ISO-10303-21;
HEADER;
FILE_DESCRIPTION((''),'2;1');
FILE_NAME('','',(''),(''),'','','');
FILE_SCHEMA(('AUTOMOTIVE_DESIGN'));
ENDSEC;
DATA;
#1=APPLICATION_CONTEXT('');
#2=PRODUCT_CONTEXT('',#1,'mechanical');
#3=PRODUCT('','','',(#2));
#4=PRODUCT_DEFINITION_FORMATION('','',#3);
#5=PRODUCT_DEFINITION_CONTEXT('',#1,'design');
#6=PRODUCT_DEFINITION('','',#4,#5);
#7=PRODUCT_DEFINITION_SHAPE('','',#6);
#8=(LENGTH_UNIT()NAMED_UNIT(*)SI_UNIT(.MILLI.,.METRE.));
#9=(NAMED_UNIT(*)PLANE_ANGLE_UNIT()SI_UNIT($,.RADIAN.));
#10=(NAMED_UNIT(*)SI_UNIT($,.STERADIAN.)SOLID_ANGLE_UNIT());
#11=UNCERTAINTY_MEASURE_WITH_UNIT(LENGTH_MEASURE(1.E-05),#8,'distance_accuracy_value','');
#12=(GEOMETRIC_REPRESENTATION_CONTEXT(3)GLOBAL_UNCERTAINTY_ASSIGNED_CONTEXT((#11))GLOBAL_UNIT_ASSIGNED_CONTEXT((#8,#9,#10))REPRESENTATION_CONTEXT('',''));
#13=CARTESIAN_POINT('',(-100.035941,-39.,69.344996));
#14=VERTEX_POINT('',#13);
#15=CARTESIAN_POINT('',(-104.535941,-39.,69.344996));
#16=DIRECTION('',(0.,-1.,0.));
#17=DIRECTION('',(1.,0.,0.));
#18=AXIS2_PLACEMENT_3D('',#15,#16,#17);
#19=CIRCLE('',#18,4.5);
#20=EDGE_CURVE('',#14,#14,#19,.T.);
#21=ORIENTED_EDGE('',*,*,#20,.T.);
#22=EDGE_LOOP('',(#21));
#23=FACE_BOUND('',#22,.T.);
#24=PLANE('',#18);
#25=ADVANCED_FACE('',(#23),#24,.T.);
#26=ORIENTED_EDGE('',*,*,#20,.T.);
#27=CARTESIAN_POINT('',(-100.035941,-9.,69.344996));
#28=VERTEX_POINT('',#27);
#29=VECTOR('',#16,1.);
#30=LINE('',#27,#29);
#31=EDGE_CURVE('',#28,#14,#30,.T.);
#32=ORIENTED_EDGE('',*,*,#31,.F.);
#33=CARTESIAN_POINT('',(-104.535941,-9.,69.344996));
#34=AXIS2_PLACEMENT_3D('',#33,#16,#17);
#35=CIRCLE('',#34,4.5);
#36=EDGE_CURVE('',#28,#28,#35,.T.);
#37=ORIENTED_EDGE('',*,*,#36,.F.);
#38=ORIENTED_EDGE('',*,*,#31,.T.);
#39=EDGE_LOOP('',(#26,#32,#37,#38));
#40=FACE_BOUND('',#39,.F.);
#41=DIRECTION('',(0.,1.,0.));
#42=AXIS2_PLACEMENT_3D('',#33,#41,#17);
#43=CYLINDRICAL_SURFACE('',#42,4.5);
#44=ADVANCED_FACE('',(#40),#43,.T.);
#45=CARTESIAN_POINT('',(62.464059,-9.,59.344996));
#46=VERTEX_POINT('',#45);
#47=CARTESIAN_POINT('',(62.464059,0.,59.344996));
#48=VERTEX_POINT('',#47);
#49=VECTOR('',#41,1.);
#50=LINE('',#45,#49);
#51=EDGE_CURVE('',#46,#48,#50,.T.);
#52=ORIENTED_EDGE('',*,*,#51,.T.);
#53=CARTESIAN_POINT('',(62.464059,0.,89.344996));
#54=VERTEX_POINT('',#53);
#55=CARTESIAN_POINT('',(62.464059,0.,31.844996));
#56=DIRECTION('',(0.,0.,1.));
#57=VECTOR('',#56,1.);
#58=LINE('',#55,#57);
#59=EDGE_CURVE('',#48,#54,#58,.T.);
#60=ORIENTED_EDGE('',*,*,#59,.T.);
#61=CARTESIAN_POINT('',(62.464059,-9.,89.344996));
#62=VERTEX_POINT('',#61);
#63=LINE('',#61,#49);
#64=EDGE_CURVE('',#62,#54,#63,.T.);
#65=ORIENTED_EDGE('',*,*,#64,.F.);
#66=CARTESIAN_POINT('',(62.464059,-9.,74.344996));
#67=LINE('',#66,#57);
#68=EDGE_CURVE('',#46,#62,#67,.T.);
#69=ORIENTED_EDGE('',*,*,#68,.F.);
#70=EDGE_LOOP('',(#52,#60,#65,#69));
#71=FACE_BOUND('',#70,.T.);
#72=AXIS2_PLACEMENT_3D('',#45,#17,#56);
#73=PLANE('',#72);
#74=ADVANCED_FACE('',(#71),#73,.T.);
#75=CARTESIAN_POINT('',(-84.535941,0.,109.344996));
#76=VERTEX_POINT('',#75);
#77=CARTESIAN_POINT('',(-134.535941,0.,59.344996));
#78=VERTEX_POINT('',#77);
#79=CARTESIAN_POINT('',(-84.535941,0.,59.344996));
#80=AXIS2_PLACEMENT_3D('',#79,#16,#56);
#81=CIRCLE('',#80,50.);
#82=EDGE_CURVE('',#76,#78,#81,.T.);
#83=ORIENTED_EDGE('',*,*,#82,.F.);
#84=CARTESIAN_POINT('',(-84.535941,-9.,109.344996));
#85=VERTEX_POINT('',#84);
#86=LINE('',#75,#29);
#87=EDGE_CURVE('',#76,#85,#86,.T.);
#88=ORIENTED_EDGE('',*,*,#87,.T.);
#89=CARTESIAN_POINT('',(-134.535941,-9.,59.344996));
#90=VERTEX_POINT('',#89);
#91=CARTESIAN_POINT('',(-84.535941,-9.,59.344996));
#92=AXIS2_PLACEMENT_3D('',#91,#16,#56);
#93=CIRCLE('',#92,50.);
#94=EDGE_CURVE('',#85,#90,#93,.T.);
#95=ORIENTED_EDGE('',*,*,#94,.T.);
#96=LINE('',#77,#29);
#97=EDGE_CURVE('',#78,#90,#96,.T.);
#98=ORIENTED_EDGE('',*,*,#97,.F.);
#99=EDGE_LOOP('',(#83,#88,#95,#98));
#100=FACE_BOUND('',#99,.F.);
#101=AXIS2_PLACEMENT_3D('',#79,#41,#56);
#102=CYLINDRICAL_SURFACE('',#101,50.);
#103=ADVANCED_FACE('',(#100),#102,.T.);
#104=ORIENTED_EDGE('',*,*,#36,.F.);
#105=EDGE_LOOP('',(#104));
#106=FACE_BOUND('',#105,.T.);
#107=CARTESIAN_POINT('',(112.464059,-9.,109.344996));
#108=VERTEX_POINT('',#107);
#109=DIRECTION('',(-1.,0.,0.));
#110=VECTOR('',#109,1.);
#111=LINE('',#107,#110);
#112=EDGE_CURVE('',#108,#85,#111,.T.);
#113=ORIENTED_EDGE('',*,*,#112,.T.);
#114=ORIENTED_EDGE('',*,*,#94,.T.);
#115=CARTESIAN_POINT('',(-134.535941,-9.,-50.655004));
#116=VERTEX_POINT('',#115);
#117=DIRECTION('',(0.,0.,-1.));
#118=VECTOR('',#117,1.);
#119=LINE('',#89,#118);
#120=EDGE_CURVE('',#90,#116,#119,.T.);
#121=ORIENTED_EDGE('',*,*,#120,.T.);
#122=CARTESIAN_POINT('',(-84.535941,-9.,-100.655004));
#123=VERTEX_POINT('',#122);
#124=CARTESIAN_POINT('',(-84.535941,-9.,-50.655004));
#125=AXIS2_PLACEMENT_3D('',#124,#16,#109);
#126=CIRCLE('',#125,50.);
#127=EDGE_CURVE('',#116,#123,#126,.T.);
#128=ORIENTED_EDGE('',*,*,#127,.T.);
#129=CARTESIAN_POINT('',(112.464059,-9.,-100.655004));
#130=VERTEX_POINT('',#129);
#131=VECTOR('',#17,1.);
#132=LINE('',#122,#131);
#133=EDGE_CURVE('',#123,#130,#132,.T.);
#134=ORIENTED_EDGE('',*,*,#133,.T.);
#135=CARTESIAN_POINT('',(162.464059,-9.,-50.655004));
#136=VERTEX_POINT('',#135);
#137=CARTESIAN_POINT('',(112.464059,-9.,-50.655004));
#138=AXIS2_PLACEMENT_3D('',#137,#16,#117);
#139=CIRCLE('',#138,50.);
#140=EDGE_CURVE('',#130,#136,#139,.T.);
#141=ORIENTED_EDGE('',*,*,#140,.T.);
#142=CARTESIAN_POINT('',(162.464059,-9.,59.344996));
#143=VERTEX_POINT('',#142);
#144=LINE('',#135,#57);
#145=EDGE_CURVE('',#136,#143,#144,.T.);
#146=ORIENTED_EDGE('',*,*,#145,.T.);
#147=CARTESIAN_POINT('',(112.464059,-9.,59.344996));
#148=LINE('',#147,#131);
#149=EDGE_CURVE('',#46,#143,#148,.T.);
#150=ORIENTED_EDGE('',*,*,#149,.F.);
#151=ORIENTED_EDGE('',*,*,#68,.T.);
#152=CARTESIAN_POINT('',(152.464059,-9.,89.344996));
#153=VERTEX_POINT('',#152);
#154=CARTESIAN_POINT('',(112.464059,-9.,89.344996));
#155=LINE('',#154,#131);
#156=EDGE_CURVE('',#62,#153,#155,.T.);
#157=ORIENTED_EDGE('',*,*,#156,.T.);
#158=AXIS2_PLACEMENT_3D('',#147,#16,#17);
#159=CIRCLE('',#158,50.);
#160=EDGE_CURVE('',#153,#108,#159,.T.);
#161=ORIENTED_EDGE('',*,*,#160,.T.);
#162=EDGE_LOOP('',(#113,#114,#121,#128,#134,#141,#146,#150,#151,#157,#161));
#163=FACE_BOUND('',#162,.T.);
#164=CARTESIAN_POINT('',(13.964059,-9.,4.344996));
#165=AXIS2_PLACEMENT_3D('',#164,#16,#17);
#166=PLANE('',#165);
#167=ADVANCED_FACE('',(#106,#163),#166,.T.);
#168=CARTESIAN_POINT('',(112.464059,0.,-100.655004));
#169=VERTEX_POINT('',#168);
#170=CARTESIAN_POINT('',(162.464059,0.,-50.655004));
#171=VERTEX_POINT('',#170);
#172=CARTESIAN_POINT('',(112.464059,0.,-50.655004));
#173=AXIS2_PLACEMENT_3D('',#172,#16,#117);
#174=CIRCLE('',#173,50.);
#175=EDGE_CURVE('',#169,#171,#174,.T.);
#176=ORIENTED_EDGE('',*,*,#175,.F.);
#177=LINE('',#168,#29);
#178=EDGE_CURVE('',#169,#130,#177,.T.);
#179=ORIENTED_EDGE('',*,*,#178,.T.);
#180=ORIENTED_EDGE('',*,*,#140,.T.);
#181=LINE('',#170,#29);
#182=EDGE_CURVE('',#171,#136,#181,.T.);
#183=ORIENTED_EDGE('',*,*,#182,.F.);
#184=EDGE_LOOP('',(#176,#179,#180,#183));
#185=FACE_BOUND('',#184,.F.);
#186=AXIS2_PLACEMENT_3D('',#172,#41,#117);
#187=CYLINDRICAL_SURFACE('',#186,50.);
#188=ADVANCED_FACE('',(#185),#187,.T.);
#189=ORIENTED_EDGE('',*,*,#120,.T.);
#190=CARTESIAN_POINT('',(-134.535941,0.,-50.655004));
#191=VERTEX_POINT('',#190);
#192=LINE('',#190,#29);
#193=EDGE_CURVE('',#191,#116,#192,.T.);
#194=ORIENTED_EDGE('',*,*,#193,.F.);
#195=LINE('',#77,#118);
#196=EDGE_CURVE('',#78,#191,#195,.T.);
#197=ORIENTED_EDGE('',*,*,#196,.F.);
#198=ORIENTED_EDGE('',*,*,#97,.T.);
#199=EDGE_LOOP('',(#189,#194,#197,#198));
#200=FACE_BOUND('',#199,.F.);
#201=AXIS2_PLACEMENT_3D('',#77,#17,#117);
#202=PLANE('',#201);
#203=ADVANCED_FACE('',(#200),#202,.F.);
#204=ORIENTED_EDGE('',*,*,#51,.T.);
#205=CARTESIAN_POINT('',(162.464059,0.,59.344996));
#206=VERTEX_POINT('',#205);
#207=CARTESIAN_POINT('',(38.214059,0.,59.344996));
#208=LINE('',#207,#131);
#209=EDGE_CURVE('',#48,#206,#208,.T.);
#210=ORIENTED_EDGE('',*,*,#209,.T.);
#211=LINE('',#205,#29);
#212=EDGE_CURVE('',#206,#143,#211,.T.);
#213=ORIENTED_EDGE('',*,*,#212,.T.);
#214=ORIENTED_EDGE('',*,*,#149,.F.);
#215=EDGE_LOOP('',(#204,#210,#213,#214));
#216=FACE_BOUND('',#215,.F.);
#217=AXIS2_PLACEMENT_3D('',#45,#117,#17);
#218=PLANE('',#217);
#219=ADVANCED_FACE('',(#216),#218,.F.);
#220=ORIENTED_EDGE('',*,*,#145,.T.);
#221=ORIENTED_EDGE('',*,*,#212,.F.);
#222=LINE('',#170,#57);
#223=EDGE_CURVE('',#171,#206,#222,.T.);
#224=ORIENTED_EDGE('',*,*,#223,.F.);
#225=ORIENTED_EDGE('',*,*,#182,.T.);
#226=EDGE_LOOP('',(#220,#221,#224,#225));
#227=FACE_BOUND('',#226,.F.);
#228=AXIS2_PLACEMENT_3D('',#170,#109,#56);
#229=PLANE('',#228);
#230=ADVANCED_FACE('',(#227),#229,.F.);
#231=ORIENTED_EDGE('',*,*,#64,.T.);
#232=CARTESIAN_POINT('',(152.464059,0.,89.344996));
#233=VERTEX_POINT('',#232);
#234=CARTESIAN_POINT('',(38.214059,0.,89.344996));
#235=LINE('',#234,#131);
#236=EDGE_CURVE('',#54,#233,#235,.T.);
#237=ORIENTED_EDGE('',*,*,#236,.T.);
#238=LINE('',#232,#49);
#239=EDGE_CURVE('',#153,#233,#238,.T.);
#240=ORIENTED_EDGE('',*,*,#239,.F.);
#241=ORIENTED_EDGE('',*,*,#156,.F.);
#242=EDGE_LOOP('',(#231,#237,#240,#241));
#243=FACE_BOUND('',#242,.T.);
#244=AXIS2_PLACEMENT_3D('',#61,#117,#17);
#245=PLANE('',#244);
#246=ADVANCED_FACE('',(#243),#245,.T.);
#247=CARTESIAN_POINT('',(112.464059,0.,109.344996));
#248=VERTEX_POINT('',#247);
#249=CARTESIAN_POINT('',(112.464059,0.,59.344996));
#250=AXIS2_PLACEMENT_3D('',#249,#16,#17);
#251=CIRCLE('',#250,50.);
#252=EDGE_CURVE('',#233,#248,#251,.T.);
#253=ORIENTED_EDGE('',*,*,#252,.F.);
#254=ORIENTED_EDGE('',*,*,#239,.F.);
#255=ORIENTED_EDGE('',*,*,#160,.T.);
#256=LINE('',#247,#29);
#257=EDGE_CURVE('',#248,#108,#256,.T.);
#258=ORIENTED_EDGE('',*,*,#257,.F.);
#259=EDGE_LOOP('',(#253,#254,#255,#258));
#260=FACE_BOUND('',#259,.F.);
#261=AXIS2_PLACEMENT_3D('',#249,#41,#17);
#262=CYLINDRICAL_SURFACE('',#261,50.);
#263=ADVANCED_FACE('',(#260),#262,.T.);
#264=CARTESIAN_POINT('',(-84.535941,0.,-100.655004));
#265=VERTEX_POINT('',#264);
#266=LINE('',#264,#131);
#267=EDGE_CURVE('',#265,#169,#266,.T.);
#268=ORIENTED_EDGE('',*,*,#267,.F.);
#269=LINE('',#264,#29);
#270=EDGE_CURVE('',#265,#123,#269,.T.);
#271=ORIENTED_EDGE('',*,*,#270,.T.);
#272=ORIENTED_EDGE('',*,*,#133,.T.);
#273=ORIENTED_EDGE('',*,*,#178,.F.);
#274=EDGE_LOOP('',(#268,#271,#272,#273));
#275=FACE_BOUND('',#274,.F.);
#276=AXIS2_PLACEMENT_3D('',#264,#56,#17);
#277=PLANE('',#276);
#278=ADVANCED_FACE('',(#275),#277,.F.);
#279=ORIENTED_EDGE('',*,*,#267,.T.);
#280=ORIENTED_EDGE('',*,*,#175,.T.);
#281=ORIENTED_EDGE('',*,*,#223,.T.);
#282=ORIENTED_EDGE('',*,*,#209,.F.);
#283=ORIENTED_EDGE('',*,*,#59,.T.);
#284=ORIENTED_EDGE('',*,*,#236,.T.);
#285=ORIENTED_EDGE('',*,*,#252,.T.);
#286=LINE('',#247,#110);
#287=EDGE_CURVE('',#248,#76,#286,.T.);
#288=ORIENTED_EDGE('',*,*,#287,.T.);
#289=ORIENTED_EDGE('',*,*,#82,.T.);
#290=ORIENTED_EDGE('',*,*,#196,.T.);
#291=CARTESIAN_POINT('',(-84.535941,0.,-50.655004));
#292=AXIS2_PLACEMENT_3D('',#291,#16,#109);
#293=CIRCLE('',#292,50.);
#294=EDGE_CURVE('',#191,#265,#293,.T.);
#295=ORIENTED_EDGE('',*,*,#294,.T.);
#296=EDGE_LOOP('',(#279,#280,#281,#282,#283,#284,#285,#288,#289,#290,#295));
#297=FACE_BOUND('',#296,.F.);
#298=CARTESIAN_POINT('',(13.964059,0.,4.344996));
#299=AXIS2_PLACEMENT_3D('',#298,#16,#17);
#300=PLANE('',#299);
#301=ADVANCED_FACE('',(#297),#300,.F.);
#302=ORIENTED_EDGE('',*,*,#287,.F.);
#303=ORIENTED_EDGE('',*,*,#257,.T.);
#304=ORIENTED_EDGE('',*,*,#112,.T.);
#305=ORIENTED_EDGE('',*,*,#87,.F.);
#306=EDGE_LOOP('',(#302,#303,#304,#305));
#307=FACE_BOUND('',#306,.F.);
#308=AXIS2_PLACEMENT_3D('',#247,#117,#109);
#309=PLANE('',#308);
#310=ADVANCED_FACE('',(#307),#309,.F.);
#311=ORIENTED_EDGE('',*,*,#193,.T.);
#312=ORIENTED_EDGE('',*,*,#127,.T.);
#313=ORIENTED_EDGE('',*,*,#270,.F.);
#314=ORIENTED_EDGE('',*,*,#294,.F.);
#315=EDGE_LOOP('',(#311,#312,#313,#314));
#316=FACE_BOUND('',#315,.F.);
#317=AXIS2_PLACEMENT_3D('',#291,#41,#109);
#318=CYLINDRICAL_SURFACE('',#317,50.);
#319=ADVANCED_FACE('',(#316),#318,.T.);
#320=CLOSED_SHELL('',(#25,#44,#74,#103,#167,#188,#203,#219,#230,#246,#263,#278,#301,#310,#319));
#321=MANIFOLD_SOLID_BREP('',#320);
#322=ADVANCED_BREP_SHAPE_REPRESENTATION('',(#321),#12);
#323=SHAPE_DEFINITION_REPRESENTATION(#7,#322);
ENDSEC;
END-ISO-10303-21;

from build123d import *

# Parameters (mm, degrees)
F1_DEPTH = 9
F2_R     = 4.5
F3_DEPTH = 30
F5_W     = 100
F5_H     = 30
F6_DEPTH = 25


# Not quite as in the source:
# - the program builds the solid bodies; features that only make, move or delete a surface that nothing else refers to are left out


with BuildPart() as f1:
    # F0 (on Front) → F1 (new body)
    with BuildSketch(Plane.XZ):
        with BuildLine():
            Line((112.4640594495, 109.3449960649), (-84.5359405505, 109.3449960649))
            ThreePointArc((-84.5359405505, 109.3449960649), (-119.8912796099, 94.7003351242), (-134.5359405505, 59.3449960649))
            Line((-134.5359405505, 59.3449960649), (-134.5359405505, -50.6550039351))
            ThreePointArc((-134.5359405505, -50.6550039351), (-119.8912796099, -86.0103429944), (-84.5359405505, -100.6550039351))
            Line((-84.5359405505, -100.6550039351), (112.4640594495, -100.6550039351))
            ThreePointArc((112.4640594495, -100.6550039351), (147.8193985088, -86.0103429944), (162.4640594495, -50.6550039351))
            Line((162.4640594495, -50.6550039351), (162.4640594495, 59.3449960649))
            ThreePointArc((162.4640594495, 59.3449960649), (147.8193985088, 94.7003351242), (112.4640594495, 109.3449960649))
        make_face()
    extrude(amount=F1_DEPTH)

    # F2 (on face) → F3 (join)
    with BuildSketch(Plane.XZ.offset(9)):
        with Locations((-104.5359405505, 69.3449960649)):
            Circle(F2_R)
    extrude(amount=F3_DEPTH)

    # F5 (on face) → F6 (cut)
    with BuildSketch(Plane.XZ.offset(9)):
        with Locations((112.4640594495, 74.3449960649)):
            Rectangle(F5_W, F5_H)
    extrude(amount=-F6_DEPTH, mode=Mode.SUBTRACT)


solid = f1.part
